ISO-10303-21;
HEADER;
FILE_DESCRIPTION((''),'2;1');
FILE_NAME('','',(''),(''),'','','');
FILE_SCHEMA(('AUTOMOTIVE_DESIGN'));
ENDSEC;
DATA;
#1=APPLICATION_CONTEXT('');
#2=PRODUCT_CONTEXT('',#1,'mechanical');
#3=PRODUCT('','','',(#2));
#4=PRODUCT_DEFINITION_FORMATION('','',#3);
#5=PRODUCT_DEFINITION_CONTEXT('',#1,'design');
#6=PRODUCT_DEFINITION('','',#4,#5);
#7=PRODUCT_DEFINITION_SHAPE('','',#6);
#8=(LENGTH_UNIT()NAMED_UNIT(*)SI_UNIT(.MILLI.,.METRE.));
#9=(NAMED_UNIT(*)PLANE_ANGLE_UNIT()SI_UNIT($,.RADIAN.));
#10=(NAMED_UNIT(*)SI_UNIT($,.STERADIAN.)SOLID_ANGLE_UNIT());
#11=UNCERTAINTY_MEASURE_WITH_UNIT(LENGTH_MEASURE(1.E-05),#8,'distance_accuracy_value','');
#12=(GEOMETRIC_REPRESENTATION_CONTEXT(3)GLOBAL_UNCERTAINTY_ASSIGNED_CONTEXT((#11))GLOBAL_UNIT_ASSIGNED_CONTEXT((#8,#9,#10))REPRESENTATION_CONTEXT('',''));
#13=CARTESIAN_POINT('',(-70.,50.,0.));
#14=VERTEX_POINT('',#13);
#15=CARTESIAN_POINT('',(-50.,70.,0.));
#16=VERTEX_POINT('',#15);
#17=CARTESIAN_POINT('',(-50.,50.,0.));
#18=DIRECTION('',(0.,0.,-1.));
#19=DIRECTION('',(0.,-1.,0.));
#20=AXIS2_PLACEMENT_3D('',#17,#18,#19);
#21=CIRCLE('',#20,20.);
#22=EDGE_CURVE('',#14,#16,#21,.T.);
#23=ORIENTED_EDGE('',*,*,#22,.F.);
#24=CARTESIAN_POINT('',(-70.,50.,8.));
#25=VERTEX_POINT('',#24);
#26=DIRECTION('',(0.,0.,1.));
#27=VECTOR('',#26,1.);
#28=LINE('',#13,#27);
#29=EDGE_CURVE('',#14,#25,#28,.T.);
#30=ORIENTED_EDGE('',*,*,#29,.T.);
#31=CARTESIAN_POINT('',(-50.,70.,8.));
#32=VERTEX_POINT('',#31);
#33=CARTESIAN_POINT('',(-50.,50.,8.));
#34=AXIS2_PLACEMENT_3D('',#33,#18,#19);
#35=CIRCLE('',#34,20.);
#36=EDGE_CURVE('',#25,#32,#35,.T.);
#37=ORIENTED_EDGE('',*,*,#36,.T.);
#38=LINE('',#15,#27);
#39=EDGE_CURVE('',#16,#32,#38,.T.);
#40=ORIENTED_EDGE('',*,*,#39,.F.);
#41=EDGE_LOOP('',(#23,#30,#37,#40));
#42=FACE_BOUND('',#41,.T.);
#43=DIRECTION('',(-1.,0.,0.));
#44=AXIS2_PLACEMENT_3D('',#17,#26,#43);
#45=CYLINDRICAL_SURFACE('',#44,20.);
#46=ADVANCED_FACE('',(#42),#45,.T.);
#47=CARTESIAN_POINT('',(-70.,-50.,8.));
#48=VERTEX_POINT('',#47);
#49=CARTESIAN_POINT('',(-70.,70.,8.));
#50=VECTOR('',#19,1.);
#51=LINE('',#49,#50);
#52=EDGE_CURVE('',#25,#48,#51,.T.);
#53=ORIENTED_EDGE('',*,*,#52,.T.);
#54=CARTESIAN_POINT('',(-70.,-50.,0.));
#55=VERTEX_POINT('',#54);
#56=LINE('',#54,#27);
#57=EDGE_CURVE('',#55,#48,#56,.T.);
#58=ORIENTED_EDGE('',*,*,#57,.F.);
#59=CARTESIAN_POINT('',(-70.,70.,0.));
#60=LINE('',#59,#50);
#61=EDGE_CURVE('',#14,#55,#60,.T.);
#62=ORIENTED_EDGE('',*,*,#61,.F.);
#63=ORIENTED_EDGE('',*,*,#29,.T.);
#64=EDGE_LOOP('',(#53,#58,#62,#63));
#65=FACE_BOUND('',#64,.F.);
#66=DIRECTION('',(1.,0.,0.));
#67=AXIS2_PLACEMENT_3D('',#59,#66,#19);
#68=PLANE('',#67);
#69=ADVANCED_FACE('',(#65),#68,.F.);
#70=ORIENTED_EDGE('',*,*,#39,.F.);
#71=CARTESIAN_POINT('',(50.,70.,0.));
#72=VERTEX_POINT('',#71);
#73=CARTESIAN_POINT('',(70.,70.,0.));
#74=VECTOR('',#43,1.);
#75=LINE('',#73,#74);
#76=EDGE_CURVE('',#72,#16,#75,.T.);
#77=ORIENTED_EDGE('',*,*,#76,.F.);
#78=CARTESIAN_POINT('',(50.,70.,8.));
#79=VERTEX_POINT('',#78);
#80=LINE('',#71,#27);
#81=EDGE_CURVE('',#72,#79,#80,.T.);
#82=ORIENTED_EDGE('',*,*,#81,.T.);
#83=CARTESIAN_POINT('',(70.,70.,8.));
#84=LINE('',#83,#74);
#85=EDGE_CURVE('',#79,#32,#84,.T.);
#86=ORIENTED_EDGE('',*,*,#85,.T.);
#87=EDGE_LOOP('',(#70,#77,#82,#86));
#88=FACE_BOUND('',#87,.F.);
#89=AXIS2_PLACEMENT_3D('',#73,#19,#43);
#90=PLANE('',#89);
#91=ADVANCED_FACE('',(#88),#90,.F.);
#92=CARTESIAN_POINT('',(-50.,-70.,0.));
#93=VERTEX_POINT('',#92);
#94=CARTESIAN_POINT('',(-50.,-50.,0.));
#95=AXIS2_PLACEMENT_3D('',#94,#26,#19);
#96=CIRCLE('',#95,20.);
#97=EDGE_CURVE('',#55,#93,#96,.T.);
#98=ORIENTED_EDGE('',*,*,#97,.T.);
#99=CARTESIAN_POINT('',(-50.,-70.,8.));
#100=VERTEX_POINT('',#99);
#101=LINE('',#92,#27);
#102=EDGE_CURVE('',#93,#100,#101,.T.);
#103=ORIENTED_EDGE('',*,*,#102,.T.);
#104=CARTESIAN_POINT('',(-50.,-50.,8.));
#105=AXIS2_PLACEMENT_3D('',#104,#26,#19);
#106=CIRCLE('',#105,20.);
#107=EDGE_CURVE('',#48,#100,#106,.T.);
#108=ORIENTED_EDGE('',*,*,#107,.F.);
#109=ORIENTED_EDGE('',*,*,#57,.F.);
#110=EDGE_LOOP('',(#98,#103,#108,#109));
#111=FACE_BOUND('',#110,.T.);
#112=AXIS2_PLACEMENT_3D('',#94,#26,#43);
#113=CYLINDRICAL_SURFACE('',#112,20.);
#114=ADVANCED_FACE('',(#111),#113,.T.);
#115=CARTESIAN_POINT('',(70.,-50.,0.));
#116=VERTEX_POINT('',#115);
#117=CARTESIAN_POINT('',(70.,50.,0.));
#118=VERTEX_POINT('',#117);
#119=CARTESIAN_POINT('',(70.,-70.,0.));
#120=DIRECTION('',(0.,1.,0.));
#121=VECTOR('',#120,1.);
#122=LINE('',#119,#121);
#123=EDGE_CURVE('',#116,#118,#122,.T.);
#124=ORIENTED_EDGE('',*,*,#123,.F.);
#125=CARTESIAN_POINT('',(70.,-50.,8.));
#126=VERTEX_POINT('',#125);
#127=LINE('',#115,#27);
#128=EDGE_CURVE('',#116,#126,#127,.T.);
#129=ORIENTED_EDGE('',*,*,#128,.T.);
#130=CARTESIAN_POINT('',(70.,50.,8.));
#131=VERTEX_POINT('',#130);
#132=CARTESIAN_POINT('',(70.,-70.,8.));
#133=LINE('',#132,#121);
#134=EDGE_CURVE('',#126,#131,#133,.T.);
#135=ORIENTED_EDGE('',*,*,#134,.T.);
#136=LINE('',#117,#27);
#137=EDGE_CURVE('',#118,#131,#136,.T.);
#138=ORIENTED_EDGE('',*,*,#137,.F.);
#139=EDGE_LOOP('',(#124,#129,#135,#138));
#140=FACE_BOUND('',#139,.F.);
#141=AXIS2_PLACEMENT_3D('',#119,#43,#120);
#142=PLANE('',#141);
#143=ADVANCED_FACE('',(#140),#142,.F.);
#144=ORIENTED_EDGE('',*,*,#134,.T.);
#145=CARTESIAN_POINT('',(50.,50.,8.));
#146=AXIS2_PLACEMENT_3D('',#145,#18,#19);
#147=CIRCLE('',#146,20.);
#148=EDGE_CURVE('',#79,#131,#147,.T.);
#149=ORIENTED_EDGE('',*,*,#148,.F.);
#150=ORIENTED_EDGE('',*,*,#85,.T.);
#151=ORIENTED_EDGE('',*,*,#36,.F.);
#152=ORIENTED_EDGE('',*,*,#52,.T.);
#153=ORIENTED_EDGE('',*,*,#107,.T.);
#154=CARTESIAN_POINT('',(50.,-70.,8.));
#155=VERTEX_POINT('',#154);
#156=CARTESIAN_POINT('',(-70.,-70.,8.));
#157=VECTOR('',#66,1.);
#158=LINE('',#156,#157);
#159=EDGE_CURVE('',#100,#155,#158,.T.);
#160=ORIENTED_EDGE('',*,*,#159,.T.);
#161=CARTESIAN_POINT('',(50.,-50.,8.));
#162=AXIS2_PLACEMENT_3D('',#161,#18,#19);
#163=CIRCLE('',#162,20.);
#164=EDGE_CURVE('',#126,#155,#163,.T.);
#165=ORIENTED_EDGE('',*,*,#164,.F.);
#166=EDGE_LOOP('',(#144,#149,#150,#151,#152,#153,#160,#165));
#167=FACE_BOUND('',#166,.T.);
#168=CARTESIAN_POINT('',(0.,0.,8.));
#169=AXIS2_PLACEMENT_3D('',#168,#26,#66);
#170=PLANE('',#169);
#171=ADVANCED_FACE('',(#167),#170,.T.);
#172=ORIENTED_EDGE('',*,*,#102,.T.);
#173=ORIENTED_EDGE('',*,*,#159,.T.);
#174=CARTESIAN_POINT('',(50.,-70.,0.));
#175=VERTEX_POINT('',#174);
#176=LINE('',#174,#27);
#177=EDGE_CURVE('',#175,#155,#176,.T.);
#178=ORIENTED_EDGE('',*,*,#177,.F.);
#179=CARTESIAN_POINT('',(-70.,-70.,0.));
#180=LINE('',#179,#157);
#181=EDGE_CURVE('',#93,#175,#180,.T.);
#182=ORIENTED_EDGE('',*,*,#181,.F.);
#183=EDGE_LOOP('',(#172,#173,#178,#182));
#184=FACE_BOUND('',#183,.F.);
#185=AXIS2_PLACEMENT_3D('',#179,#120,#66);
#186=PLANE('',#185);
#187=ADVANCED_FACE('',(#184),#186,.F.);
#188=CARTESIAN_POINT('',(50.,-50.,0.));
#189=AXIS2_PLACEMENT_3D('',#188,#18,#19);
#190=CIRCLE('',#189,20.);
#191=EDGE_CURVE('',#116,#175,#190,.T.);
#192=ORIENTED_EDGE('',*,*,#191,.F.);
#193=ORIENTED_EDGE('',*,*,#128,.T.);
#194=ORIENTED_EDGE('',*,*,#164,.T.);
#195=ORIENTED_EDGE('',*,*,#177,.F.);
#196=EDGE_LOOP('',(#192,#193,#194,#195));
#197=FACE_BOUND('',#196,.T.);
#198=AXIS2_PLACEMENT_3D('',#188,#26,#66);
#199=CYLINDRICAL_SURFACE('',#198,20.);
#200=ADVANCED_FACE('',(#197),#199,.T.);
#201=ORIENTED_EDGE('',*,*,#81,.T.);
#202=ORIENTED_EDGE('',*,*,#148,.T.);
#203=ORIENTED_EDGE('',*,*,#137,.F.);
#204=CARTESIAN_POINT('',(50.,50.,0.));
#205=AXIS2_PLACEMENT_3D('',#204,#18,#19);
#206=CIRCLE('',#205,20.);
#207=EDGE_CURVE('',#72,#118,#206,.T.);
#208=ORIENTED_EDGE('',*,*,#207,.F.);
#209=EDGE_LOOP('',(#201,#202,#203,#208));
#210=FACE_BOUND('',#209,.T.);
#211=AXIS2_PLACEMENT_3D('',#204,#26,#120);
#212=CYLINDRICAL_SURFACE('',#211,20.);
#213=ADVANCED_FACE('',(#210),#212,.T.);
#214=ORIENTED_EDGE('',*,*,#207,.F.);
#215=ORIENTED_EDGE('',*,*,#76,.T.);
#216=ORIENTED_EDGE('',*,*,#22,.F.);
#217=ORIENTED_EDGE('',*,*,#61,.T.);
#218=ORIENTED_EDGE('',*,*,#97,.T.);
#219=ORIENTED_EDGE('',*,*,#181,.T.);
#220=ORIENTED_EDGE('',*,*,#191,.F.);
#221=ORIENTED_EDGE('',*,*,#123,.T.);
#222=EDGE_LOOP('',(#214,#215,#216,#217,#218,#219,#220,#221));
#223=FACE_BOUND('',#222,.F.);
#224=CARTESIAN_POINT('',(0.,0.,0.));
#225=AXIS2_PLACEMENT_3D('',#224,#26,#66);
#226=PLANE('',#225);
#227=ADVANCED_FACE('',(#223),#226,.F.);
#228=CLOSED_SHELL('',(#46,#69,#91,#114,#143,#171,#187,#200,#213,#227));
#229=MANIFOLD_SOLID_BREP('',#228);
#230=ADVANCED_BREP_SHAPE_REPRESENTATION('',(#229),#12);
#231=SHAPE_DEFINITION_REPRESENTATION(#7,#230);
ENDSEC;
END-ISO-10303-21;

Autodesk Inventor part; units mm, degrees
ref_plane "YZ Plane" through (0, 0, 0) normal (1, 0, 0) x (0, 1, 0)
ref_plane "XZ Plane" through (0, 0, 0) normal (0, 1, 0) x (-1, 0, 0)
ref_plane "XY Plane" through (0, 0, 0) normal (0, 0, 1) x (1, 0, 0)
sketch "Sketch1" plane through (0, 0, 0) normal (0, 0, 1) x (1, 0, 0)
  line L0 (-70, -70) -> (70, -70)
  line L1 (70, -70) -> (70, 70)
  line L2 (70, 70) -> (-70, 70)
  line L3 (-70, 70) -> (-70, -70)
  line L4 (-70, -70) -> (70, 70) construction
  line L5 (70, -70) -> (-70, 70) construction
  point P0 (0, 0)
  dimension "d0" = 140
  dimension "d1" = 140
extrude "Plate1" add sketch "Sketch1" along normal blind 8
fillet "Corner Round1" radius 20 4 edges at (70, -70, 4) (-70, -70, 4) (-70, 70, 4) (70, 70, 4)
equation "\"d0\" = d1"
equation "\"d2\" = Thickness"
equation "\"BendReliefWidth\" = Thickness"
equation "\"BendReliefDepth\" = 0.5 * Thickness"
equation "\"CornerReliefSize\" = 4 * Thickness"
equation "\"MinimumRemnant\" = 2 * Thickness"
equation "\"TransitionRadius\" = BendRadius"
equation "\"JacobiRadiusSize\" = BendRadius"
equation "\"GapSize\" = Thickness"
equation "\"Thickness\" = 8"
equation "\"BendRadius\" = 5"
properties part number "TZS 0982 leg plate for filter" material "Steel"
